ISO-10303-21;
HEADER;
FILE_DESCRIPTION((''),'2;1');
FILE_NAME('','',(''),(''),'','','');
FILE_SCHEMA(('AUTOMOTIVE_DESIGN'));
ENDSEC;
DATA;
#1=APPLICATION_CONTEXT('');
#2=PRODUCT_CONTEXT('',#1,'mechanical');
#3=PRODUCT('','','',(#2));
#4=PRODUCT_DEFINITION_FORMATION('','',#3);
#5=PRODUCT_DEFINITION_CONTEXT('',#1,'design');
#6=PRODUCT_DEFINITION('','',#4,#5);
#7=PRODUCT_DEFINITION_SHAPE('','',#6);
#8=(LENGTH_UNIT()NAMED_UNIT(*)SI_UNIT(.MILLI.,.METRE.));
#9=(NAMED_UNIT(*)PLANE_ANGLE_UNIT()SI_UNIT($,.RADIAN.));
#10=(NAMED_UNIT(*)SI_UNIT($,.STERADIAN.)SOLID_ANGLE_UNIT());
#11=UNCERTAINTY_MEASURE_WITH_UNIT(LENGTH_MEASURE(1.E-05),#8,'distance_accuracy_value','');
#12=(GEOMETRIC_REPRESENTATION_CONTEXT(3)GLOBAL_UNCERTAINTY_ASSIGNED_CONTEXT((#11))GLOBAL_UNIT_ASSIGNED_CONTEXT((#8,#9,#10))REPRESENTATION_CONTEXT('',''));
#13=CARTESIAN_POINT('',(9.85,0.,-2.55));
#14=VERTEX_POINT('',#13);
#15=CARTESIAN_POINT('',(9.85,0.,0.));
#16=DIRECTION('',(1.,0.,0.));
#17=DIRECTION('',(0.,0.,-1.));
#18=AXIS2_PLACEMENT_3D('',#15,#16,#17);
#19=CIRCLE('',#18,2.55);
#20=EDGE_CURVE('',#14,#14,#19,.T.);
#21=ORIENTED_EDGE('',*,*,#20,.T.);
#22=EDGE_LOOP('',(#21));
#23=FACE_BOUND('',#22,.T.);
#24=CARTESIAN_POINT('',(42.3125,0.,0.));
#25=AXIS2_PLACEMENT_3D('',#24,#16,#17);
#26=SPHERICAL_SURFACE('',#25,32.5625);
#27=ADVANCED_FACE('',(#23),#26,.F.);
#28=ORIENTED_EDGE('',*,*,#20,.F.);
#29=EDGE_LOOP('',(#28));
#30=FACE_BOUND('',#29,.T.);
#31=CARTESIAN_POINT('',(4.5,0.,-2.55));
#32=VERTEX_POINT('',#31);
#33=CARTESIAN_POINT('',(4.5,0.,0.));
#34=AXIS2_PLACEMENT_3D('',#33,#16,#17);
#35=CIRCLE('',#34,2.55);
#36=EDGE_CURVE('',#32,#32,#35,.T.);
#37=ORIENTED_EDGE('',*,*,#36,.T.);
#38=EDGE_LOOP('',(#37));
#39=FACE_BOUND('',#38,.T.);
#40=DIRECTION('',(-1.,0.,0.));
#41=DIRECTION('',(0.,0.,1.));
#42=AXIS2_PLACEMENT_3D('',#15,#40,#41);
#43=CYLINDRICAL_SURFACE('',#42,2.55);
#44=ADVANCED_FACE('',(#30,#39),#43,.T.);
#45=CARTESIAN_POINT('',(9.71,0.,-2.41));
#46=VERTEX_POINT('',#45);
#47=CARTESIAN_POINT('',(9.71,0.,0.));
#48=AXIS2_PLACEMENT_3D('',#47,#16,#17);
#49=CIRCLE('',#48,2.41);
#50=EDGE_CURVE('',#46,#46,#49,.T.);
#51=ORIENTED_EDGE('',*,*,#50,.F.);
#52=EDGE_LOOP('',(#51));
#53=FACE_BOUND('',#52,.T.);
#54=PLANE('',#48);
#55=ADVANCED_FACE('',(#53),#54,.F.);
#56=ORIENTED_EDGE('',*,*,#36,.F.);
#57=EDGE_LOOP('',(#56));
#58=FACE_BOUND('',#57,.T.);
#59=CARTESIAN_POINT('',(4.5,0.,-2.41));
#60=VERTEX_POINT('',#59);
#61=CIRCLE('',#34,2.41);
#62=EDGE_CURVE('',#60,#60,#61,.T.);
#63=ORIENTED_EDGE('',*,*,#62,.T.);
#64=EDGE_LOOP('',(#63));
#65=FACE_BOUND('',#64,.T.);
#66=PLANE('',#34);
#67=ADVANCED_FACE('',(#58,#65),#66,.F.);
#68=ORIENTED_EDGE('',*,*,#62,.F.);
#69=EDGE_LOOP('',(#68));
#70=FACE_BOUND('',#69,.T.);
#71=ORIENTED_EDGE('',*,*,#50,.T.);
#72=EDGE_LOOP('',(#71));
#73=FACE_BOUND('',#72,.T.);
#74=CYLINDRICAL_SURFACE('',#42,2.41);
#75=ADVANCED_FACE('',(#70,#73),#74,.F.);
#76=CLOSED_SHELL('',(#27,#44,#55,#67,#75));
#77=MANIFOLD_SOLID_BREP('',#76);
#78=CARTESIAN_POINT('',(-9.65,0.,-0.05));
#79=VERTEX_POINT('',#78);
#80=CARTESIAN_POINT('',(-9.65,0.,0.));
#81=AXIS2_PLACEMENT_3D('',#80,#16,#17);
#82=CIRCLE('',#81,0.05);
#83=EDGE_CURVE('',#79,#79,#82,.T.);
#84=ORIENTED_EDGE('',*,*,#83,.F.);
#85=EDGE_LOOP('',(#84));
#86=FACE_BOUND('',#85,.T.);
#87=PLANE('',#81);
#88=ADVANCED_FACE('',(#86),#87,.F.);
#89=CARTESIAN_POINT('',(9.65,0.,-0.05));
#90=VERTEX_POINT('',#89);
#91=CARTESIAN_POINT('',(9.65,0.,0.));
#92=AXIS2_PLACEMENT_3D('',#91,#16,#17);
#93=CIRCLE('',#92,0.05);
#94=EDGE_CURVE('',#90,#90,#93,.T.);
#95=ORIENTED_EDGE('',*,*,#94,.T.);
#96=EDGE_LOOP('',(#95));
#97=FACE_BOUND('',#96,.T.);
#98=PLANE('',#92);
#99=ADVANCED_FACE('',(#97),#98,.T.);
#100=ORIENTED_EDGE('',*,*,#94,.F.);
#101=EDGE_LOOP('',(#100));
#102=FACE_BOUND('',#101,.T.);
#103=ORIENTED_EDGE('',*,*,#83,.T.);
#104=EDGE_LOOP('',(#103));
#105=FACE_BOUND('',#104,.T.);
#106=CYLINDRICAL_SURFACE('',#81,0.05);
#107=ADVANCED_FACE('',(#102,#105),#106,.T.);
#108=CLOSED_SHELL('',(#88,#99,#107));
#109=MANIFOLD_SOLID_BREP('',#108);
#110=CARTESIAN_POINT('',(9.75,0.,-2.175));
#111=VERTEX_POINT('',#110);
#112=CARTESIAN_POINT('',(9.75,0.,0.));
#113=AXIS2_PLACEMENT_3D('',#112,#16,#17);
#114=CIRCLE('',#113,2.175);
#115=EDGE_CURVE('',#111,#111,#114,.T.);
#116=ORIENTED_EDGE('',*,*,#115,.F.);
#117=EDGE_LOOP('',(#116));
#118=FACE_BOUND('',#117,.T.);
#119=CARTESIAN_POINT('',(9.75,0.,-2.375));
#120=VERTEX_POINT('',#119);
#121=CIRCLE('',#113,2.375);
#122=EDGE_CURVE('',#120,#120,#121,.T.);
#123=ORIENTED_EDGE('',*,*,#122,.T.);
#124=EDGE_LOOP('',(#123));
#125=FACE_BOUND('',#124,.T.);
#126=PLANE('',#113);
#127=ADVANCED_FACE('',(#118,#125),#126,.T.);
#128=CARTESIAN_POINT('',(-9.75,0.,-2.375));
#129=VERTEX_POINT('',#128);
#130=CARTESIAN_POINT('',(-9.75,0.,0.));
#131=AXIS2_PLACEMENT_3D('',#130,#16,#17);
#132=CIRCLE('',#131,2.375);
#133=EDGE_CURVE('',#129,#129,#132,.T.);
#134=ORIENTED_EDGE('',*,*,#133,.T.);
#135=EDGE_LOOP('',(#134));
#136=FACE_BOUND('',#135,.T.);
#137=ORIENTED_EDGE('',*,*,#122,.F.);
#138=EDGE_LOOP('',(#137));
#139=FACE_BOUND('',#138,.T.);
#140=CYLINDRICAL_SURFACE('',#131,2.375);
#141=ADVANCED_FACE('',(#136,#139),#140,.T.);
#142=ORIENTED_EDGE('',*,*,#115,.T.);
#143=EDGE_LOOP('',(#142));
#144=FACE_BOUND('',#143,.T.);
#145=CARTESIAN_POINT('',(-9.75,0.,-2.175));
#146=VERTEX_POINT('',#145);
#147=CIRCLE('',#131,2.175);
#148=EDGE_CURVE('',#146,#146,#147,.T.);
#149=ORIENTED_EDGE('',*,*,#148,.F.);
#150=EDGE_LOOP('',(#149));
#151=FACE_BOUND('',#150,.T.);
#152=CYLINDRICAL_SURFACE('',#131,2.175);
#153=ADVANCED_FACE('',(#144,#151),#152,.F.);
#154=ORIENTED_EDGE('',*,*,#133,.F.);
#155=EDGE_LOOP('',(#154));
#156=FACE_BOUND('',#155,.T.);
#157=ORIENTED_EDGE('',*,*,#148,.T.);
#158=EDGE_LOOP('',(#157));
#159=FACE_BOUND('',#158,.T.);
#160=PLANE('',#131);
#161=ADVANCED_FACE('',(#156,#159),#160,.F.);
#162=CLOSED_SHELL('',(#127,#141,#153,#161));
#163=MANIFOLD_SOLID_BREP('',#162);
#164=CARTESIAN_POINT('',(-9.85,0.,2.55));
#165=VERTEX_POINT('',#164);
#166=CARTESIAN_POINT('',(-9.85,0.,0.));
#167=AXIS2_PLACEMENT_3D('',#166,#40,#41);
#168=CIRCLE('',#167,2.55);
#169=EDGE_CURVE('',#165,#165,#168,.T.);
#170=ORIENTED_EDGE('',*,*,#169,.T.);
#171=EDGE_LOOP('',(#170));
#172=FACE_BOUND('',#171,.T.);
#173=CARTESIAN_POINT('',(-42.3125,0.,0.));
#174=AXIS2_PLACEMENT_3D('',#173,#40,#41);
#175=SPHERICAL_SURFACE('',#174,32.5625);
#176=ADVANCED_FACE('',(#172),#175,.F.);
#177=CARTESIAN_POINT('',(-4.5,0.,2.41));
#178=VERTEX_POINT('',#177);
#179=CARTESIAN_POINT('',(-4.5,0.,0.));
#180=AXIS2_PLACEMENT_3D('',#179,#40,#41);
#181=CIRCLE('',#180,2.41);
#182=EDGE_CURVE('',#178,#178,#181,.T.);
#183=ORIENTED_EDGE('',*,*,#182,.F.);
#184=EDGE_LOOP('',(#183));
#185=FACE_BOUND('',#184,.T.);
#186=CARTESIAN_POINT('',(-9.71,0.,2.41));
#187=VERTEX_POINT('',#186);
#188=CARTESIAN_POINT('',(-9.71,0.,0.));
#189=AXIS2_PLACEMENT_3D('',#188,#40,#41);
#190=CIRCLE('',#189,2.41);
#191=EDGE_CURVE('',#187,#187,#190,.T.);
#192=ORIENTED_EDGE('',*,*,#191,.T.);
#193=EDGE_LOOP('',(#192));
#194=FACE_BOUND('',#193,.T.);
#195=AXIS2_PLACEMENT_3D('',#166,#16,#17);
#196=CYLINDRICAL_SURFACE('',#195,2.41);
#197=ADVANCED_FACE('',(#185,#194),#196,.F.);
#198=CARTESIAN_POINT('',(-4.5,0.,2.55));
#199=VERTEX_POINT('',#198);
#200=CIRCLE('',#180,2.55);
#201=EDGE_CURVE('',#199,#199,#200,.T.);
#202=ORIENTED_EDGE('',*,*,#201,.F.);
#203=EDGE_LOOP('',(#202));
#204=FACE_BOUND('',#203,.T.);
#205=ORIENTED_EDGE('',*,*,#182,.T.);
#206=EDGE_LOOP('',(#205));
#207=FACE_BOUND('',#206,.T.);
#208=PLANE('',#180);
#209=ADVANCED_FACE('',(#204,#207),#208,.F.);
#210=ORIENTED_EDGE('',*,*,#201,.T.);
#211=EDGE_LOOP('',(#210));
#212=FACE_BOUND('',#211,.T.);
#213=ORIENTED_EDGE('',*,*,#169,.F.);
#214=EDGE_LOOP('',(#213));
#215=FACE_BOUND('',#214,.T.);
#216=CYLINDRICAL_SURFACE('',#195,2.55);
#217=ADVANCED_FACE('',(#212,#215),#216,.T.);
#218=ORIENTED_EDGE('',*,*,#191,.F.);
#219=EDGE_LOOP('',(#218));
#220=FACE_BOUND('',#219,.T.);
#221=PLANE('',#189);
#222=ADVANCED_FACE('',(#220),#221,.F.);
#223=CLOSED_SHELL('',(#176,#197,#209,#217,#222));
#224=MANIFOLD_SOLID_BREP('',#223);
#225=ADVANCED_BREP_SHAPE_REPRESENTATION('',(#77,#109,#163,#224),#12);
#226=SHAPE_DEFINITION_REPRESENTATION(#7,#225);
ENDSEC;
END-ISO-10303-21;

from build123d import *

# Parameters (mm, degrees)
EXTRUDE1_DEPTH      = 9.75
EXTRUDE1_DEPTH_BACK = 9.75
SKETCH1_R           = 2.375
SHELL1_T            = -0.2
EXTRUDE2_DEPTH      = 9.65
EXTRUDE2_DEPTH_BACK = 9.65
SKETCH2_R           = 0.05
EXTRUDE3_DEPTH      = 0.1
EXTRUDE3_DEPTH_BACK = 5.25
SKETCH3_R           = 2.55
SHELL3_T            = -0.14
EXTRUDE5_DEPTH      = 0.1
EXTRUDE5_DEPTH_BACK = 5.25
SKETCH5_R           = 2.55
SHELL6_T            = -0.14


# Read off the part's stored shape, not the designer's step: Dome2, Dome3
with BuildPart() as part:
    # Sketch1 → Extrude1 (new, two sides: drawn at the far end of the back side and taken through both)
    with BuildSketch(Plane(origin=(0, 0, 0), x_dir=(0, 0, -1), z_dir=(1, 0, 0)).offset(-EXTRUDE1_DEPTH_BACK)):
        Circle(SKETCH1_R)
    extrude(amount=EXTRUDE1_DEPTH + EXTRUDE1_DEPTH_BACK)

    # Shell1
    shell1_openings = [part.faces().sort_by_distance(p)[0] for p in [
        (-9.75, 0, 0),
        (9.75, 0, 0),
    ]]
    offset(amount=SHELL1_T, openings=shell1_openings, kind=Kind.INTERSECTION)


with BuildPart() as body_2:
    # Sketch2 → Extrude2 (new, two sides: drawn at the far end of the back side and taken through both)
    with BuildSketch(Plane(origin=(0, 0, 0), x_dir=(0, 0, -1), z_dir=(1, 0, 0)).offset(-EXTRUDE2_DEPTH_BACK)):
        Circle(SKETCH2_R)
    extrude(amount=EXTRUDE2_DEPTH + EXTRUDE2_DEPTH_BACK)


with BuildPart() as body_3:
    # Sketch3 → Extrude3 (new, two sides: drawn at the far end of the back side and taken through both)
    with BuildSketch(Plane(origin=(9.75, 0, 0), x_dir=(0, 0, -1), z_dir=(1, 0, 0)).offset(-EXTRUDE3_DEPTH_BACK)):
        Circle(SKETCH3_R)
    extrude(amount=EXTRUDE3_DEPTH + EXTRUDE3_DEPTH_BACK)

    # Shell3
    shell3_openings = [body_3.faces().sort_by_distance(p)[0] for p in [
        (4.5, 0, 0),
    ]]
    offset(amount=SHELL3_T, openings=shell3_openings)

    # Dome2 outline → Dome2 (revolve, cut)
    with BuildSketch(Plane.YX):
        with BuildLine():
            Line((0, 9.850000003), (0, 9.75))
            ThreePointArc((0, 9.75), (1.275980032, 9.775009605), (2.550000032, 9.850000003))
            Line((2.550000032, 9.850000003), (0, 9.850000003))
        make_face()
    revolve(axis=Axis((0, 0, 0), (1, 0, 0)), mode=Mode.SUBTRACT)


with BuildPart() as body_4:
    # Sketch5 → Extrude5 (new, two sides: drawn at the far end of the back side and taken through both)
    with BuildSketch(Plane.ZY.offset(9.75).offset(-EXTRUDE5_DEPTH_BACK)):
        Circle(SKETCH5_R)
    extrude(amount=EXTRUDE5_DEPTH + EXTRUDE5_DEPTH_BACK)

    # Shell6
    shell6_openings = [body_4.faces().sort_by_distance(p)[0] for p in [
        (-4.5, 0, 0),
    ]]
    offset(amount=SHELL6_T, openings=shell6_openings)

    # Dome3 outline → Dome3 (revolve, cut)
    with BuildSketch(Plane.YX):
        with BuildLine():
            Line((0, -9.85), (2.550000032, -9.850000003))
            ThreePointArc((2.550000032, -9.850000003), (1.275980032, -9.775009605), (0, -9.75))
            Line((0, -9.75), (0, -9.85))
        make_face()
    revolve(axis=Axis((0, 0, 0), (1, 0, 0)), mode=Mode.SUBTRACT)


solid = Compound([part.part, body_2.part, body_3.part, body_4.part])
